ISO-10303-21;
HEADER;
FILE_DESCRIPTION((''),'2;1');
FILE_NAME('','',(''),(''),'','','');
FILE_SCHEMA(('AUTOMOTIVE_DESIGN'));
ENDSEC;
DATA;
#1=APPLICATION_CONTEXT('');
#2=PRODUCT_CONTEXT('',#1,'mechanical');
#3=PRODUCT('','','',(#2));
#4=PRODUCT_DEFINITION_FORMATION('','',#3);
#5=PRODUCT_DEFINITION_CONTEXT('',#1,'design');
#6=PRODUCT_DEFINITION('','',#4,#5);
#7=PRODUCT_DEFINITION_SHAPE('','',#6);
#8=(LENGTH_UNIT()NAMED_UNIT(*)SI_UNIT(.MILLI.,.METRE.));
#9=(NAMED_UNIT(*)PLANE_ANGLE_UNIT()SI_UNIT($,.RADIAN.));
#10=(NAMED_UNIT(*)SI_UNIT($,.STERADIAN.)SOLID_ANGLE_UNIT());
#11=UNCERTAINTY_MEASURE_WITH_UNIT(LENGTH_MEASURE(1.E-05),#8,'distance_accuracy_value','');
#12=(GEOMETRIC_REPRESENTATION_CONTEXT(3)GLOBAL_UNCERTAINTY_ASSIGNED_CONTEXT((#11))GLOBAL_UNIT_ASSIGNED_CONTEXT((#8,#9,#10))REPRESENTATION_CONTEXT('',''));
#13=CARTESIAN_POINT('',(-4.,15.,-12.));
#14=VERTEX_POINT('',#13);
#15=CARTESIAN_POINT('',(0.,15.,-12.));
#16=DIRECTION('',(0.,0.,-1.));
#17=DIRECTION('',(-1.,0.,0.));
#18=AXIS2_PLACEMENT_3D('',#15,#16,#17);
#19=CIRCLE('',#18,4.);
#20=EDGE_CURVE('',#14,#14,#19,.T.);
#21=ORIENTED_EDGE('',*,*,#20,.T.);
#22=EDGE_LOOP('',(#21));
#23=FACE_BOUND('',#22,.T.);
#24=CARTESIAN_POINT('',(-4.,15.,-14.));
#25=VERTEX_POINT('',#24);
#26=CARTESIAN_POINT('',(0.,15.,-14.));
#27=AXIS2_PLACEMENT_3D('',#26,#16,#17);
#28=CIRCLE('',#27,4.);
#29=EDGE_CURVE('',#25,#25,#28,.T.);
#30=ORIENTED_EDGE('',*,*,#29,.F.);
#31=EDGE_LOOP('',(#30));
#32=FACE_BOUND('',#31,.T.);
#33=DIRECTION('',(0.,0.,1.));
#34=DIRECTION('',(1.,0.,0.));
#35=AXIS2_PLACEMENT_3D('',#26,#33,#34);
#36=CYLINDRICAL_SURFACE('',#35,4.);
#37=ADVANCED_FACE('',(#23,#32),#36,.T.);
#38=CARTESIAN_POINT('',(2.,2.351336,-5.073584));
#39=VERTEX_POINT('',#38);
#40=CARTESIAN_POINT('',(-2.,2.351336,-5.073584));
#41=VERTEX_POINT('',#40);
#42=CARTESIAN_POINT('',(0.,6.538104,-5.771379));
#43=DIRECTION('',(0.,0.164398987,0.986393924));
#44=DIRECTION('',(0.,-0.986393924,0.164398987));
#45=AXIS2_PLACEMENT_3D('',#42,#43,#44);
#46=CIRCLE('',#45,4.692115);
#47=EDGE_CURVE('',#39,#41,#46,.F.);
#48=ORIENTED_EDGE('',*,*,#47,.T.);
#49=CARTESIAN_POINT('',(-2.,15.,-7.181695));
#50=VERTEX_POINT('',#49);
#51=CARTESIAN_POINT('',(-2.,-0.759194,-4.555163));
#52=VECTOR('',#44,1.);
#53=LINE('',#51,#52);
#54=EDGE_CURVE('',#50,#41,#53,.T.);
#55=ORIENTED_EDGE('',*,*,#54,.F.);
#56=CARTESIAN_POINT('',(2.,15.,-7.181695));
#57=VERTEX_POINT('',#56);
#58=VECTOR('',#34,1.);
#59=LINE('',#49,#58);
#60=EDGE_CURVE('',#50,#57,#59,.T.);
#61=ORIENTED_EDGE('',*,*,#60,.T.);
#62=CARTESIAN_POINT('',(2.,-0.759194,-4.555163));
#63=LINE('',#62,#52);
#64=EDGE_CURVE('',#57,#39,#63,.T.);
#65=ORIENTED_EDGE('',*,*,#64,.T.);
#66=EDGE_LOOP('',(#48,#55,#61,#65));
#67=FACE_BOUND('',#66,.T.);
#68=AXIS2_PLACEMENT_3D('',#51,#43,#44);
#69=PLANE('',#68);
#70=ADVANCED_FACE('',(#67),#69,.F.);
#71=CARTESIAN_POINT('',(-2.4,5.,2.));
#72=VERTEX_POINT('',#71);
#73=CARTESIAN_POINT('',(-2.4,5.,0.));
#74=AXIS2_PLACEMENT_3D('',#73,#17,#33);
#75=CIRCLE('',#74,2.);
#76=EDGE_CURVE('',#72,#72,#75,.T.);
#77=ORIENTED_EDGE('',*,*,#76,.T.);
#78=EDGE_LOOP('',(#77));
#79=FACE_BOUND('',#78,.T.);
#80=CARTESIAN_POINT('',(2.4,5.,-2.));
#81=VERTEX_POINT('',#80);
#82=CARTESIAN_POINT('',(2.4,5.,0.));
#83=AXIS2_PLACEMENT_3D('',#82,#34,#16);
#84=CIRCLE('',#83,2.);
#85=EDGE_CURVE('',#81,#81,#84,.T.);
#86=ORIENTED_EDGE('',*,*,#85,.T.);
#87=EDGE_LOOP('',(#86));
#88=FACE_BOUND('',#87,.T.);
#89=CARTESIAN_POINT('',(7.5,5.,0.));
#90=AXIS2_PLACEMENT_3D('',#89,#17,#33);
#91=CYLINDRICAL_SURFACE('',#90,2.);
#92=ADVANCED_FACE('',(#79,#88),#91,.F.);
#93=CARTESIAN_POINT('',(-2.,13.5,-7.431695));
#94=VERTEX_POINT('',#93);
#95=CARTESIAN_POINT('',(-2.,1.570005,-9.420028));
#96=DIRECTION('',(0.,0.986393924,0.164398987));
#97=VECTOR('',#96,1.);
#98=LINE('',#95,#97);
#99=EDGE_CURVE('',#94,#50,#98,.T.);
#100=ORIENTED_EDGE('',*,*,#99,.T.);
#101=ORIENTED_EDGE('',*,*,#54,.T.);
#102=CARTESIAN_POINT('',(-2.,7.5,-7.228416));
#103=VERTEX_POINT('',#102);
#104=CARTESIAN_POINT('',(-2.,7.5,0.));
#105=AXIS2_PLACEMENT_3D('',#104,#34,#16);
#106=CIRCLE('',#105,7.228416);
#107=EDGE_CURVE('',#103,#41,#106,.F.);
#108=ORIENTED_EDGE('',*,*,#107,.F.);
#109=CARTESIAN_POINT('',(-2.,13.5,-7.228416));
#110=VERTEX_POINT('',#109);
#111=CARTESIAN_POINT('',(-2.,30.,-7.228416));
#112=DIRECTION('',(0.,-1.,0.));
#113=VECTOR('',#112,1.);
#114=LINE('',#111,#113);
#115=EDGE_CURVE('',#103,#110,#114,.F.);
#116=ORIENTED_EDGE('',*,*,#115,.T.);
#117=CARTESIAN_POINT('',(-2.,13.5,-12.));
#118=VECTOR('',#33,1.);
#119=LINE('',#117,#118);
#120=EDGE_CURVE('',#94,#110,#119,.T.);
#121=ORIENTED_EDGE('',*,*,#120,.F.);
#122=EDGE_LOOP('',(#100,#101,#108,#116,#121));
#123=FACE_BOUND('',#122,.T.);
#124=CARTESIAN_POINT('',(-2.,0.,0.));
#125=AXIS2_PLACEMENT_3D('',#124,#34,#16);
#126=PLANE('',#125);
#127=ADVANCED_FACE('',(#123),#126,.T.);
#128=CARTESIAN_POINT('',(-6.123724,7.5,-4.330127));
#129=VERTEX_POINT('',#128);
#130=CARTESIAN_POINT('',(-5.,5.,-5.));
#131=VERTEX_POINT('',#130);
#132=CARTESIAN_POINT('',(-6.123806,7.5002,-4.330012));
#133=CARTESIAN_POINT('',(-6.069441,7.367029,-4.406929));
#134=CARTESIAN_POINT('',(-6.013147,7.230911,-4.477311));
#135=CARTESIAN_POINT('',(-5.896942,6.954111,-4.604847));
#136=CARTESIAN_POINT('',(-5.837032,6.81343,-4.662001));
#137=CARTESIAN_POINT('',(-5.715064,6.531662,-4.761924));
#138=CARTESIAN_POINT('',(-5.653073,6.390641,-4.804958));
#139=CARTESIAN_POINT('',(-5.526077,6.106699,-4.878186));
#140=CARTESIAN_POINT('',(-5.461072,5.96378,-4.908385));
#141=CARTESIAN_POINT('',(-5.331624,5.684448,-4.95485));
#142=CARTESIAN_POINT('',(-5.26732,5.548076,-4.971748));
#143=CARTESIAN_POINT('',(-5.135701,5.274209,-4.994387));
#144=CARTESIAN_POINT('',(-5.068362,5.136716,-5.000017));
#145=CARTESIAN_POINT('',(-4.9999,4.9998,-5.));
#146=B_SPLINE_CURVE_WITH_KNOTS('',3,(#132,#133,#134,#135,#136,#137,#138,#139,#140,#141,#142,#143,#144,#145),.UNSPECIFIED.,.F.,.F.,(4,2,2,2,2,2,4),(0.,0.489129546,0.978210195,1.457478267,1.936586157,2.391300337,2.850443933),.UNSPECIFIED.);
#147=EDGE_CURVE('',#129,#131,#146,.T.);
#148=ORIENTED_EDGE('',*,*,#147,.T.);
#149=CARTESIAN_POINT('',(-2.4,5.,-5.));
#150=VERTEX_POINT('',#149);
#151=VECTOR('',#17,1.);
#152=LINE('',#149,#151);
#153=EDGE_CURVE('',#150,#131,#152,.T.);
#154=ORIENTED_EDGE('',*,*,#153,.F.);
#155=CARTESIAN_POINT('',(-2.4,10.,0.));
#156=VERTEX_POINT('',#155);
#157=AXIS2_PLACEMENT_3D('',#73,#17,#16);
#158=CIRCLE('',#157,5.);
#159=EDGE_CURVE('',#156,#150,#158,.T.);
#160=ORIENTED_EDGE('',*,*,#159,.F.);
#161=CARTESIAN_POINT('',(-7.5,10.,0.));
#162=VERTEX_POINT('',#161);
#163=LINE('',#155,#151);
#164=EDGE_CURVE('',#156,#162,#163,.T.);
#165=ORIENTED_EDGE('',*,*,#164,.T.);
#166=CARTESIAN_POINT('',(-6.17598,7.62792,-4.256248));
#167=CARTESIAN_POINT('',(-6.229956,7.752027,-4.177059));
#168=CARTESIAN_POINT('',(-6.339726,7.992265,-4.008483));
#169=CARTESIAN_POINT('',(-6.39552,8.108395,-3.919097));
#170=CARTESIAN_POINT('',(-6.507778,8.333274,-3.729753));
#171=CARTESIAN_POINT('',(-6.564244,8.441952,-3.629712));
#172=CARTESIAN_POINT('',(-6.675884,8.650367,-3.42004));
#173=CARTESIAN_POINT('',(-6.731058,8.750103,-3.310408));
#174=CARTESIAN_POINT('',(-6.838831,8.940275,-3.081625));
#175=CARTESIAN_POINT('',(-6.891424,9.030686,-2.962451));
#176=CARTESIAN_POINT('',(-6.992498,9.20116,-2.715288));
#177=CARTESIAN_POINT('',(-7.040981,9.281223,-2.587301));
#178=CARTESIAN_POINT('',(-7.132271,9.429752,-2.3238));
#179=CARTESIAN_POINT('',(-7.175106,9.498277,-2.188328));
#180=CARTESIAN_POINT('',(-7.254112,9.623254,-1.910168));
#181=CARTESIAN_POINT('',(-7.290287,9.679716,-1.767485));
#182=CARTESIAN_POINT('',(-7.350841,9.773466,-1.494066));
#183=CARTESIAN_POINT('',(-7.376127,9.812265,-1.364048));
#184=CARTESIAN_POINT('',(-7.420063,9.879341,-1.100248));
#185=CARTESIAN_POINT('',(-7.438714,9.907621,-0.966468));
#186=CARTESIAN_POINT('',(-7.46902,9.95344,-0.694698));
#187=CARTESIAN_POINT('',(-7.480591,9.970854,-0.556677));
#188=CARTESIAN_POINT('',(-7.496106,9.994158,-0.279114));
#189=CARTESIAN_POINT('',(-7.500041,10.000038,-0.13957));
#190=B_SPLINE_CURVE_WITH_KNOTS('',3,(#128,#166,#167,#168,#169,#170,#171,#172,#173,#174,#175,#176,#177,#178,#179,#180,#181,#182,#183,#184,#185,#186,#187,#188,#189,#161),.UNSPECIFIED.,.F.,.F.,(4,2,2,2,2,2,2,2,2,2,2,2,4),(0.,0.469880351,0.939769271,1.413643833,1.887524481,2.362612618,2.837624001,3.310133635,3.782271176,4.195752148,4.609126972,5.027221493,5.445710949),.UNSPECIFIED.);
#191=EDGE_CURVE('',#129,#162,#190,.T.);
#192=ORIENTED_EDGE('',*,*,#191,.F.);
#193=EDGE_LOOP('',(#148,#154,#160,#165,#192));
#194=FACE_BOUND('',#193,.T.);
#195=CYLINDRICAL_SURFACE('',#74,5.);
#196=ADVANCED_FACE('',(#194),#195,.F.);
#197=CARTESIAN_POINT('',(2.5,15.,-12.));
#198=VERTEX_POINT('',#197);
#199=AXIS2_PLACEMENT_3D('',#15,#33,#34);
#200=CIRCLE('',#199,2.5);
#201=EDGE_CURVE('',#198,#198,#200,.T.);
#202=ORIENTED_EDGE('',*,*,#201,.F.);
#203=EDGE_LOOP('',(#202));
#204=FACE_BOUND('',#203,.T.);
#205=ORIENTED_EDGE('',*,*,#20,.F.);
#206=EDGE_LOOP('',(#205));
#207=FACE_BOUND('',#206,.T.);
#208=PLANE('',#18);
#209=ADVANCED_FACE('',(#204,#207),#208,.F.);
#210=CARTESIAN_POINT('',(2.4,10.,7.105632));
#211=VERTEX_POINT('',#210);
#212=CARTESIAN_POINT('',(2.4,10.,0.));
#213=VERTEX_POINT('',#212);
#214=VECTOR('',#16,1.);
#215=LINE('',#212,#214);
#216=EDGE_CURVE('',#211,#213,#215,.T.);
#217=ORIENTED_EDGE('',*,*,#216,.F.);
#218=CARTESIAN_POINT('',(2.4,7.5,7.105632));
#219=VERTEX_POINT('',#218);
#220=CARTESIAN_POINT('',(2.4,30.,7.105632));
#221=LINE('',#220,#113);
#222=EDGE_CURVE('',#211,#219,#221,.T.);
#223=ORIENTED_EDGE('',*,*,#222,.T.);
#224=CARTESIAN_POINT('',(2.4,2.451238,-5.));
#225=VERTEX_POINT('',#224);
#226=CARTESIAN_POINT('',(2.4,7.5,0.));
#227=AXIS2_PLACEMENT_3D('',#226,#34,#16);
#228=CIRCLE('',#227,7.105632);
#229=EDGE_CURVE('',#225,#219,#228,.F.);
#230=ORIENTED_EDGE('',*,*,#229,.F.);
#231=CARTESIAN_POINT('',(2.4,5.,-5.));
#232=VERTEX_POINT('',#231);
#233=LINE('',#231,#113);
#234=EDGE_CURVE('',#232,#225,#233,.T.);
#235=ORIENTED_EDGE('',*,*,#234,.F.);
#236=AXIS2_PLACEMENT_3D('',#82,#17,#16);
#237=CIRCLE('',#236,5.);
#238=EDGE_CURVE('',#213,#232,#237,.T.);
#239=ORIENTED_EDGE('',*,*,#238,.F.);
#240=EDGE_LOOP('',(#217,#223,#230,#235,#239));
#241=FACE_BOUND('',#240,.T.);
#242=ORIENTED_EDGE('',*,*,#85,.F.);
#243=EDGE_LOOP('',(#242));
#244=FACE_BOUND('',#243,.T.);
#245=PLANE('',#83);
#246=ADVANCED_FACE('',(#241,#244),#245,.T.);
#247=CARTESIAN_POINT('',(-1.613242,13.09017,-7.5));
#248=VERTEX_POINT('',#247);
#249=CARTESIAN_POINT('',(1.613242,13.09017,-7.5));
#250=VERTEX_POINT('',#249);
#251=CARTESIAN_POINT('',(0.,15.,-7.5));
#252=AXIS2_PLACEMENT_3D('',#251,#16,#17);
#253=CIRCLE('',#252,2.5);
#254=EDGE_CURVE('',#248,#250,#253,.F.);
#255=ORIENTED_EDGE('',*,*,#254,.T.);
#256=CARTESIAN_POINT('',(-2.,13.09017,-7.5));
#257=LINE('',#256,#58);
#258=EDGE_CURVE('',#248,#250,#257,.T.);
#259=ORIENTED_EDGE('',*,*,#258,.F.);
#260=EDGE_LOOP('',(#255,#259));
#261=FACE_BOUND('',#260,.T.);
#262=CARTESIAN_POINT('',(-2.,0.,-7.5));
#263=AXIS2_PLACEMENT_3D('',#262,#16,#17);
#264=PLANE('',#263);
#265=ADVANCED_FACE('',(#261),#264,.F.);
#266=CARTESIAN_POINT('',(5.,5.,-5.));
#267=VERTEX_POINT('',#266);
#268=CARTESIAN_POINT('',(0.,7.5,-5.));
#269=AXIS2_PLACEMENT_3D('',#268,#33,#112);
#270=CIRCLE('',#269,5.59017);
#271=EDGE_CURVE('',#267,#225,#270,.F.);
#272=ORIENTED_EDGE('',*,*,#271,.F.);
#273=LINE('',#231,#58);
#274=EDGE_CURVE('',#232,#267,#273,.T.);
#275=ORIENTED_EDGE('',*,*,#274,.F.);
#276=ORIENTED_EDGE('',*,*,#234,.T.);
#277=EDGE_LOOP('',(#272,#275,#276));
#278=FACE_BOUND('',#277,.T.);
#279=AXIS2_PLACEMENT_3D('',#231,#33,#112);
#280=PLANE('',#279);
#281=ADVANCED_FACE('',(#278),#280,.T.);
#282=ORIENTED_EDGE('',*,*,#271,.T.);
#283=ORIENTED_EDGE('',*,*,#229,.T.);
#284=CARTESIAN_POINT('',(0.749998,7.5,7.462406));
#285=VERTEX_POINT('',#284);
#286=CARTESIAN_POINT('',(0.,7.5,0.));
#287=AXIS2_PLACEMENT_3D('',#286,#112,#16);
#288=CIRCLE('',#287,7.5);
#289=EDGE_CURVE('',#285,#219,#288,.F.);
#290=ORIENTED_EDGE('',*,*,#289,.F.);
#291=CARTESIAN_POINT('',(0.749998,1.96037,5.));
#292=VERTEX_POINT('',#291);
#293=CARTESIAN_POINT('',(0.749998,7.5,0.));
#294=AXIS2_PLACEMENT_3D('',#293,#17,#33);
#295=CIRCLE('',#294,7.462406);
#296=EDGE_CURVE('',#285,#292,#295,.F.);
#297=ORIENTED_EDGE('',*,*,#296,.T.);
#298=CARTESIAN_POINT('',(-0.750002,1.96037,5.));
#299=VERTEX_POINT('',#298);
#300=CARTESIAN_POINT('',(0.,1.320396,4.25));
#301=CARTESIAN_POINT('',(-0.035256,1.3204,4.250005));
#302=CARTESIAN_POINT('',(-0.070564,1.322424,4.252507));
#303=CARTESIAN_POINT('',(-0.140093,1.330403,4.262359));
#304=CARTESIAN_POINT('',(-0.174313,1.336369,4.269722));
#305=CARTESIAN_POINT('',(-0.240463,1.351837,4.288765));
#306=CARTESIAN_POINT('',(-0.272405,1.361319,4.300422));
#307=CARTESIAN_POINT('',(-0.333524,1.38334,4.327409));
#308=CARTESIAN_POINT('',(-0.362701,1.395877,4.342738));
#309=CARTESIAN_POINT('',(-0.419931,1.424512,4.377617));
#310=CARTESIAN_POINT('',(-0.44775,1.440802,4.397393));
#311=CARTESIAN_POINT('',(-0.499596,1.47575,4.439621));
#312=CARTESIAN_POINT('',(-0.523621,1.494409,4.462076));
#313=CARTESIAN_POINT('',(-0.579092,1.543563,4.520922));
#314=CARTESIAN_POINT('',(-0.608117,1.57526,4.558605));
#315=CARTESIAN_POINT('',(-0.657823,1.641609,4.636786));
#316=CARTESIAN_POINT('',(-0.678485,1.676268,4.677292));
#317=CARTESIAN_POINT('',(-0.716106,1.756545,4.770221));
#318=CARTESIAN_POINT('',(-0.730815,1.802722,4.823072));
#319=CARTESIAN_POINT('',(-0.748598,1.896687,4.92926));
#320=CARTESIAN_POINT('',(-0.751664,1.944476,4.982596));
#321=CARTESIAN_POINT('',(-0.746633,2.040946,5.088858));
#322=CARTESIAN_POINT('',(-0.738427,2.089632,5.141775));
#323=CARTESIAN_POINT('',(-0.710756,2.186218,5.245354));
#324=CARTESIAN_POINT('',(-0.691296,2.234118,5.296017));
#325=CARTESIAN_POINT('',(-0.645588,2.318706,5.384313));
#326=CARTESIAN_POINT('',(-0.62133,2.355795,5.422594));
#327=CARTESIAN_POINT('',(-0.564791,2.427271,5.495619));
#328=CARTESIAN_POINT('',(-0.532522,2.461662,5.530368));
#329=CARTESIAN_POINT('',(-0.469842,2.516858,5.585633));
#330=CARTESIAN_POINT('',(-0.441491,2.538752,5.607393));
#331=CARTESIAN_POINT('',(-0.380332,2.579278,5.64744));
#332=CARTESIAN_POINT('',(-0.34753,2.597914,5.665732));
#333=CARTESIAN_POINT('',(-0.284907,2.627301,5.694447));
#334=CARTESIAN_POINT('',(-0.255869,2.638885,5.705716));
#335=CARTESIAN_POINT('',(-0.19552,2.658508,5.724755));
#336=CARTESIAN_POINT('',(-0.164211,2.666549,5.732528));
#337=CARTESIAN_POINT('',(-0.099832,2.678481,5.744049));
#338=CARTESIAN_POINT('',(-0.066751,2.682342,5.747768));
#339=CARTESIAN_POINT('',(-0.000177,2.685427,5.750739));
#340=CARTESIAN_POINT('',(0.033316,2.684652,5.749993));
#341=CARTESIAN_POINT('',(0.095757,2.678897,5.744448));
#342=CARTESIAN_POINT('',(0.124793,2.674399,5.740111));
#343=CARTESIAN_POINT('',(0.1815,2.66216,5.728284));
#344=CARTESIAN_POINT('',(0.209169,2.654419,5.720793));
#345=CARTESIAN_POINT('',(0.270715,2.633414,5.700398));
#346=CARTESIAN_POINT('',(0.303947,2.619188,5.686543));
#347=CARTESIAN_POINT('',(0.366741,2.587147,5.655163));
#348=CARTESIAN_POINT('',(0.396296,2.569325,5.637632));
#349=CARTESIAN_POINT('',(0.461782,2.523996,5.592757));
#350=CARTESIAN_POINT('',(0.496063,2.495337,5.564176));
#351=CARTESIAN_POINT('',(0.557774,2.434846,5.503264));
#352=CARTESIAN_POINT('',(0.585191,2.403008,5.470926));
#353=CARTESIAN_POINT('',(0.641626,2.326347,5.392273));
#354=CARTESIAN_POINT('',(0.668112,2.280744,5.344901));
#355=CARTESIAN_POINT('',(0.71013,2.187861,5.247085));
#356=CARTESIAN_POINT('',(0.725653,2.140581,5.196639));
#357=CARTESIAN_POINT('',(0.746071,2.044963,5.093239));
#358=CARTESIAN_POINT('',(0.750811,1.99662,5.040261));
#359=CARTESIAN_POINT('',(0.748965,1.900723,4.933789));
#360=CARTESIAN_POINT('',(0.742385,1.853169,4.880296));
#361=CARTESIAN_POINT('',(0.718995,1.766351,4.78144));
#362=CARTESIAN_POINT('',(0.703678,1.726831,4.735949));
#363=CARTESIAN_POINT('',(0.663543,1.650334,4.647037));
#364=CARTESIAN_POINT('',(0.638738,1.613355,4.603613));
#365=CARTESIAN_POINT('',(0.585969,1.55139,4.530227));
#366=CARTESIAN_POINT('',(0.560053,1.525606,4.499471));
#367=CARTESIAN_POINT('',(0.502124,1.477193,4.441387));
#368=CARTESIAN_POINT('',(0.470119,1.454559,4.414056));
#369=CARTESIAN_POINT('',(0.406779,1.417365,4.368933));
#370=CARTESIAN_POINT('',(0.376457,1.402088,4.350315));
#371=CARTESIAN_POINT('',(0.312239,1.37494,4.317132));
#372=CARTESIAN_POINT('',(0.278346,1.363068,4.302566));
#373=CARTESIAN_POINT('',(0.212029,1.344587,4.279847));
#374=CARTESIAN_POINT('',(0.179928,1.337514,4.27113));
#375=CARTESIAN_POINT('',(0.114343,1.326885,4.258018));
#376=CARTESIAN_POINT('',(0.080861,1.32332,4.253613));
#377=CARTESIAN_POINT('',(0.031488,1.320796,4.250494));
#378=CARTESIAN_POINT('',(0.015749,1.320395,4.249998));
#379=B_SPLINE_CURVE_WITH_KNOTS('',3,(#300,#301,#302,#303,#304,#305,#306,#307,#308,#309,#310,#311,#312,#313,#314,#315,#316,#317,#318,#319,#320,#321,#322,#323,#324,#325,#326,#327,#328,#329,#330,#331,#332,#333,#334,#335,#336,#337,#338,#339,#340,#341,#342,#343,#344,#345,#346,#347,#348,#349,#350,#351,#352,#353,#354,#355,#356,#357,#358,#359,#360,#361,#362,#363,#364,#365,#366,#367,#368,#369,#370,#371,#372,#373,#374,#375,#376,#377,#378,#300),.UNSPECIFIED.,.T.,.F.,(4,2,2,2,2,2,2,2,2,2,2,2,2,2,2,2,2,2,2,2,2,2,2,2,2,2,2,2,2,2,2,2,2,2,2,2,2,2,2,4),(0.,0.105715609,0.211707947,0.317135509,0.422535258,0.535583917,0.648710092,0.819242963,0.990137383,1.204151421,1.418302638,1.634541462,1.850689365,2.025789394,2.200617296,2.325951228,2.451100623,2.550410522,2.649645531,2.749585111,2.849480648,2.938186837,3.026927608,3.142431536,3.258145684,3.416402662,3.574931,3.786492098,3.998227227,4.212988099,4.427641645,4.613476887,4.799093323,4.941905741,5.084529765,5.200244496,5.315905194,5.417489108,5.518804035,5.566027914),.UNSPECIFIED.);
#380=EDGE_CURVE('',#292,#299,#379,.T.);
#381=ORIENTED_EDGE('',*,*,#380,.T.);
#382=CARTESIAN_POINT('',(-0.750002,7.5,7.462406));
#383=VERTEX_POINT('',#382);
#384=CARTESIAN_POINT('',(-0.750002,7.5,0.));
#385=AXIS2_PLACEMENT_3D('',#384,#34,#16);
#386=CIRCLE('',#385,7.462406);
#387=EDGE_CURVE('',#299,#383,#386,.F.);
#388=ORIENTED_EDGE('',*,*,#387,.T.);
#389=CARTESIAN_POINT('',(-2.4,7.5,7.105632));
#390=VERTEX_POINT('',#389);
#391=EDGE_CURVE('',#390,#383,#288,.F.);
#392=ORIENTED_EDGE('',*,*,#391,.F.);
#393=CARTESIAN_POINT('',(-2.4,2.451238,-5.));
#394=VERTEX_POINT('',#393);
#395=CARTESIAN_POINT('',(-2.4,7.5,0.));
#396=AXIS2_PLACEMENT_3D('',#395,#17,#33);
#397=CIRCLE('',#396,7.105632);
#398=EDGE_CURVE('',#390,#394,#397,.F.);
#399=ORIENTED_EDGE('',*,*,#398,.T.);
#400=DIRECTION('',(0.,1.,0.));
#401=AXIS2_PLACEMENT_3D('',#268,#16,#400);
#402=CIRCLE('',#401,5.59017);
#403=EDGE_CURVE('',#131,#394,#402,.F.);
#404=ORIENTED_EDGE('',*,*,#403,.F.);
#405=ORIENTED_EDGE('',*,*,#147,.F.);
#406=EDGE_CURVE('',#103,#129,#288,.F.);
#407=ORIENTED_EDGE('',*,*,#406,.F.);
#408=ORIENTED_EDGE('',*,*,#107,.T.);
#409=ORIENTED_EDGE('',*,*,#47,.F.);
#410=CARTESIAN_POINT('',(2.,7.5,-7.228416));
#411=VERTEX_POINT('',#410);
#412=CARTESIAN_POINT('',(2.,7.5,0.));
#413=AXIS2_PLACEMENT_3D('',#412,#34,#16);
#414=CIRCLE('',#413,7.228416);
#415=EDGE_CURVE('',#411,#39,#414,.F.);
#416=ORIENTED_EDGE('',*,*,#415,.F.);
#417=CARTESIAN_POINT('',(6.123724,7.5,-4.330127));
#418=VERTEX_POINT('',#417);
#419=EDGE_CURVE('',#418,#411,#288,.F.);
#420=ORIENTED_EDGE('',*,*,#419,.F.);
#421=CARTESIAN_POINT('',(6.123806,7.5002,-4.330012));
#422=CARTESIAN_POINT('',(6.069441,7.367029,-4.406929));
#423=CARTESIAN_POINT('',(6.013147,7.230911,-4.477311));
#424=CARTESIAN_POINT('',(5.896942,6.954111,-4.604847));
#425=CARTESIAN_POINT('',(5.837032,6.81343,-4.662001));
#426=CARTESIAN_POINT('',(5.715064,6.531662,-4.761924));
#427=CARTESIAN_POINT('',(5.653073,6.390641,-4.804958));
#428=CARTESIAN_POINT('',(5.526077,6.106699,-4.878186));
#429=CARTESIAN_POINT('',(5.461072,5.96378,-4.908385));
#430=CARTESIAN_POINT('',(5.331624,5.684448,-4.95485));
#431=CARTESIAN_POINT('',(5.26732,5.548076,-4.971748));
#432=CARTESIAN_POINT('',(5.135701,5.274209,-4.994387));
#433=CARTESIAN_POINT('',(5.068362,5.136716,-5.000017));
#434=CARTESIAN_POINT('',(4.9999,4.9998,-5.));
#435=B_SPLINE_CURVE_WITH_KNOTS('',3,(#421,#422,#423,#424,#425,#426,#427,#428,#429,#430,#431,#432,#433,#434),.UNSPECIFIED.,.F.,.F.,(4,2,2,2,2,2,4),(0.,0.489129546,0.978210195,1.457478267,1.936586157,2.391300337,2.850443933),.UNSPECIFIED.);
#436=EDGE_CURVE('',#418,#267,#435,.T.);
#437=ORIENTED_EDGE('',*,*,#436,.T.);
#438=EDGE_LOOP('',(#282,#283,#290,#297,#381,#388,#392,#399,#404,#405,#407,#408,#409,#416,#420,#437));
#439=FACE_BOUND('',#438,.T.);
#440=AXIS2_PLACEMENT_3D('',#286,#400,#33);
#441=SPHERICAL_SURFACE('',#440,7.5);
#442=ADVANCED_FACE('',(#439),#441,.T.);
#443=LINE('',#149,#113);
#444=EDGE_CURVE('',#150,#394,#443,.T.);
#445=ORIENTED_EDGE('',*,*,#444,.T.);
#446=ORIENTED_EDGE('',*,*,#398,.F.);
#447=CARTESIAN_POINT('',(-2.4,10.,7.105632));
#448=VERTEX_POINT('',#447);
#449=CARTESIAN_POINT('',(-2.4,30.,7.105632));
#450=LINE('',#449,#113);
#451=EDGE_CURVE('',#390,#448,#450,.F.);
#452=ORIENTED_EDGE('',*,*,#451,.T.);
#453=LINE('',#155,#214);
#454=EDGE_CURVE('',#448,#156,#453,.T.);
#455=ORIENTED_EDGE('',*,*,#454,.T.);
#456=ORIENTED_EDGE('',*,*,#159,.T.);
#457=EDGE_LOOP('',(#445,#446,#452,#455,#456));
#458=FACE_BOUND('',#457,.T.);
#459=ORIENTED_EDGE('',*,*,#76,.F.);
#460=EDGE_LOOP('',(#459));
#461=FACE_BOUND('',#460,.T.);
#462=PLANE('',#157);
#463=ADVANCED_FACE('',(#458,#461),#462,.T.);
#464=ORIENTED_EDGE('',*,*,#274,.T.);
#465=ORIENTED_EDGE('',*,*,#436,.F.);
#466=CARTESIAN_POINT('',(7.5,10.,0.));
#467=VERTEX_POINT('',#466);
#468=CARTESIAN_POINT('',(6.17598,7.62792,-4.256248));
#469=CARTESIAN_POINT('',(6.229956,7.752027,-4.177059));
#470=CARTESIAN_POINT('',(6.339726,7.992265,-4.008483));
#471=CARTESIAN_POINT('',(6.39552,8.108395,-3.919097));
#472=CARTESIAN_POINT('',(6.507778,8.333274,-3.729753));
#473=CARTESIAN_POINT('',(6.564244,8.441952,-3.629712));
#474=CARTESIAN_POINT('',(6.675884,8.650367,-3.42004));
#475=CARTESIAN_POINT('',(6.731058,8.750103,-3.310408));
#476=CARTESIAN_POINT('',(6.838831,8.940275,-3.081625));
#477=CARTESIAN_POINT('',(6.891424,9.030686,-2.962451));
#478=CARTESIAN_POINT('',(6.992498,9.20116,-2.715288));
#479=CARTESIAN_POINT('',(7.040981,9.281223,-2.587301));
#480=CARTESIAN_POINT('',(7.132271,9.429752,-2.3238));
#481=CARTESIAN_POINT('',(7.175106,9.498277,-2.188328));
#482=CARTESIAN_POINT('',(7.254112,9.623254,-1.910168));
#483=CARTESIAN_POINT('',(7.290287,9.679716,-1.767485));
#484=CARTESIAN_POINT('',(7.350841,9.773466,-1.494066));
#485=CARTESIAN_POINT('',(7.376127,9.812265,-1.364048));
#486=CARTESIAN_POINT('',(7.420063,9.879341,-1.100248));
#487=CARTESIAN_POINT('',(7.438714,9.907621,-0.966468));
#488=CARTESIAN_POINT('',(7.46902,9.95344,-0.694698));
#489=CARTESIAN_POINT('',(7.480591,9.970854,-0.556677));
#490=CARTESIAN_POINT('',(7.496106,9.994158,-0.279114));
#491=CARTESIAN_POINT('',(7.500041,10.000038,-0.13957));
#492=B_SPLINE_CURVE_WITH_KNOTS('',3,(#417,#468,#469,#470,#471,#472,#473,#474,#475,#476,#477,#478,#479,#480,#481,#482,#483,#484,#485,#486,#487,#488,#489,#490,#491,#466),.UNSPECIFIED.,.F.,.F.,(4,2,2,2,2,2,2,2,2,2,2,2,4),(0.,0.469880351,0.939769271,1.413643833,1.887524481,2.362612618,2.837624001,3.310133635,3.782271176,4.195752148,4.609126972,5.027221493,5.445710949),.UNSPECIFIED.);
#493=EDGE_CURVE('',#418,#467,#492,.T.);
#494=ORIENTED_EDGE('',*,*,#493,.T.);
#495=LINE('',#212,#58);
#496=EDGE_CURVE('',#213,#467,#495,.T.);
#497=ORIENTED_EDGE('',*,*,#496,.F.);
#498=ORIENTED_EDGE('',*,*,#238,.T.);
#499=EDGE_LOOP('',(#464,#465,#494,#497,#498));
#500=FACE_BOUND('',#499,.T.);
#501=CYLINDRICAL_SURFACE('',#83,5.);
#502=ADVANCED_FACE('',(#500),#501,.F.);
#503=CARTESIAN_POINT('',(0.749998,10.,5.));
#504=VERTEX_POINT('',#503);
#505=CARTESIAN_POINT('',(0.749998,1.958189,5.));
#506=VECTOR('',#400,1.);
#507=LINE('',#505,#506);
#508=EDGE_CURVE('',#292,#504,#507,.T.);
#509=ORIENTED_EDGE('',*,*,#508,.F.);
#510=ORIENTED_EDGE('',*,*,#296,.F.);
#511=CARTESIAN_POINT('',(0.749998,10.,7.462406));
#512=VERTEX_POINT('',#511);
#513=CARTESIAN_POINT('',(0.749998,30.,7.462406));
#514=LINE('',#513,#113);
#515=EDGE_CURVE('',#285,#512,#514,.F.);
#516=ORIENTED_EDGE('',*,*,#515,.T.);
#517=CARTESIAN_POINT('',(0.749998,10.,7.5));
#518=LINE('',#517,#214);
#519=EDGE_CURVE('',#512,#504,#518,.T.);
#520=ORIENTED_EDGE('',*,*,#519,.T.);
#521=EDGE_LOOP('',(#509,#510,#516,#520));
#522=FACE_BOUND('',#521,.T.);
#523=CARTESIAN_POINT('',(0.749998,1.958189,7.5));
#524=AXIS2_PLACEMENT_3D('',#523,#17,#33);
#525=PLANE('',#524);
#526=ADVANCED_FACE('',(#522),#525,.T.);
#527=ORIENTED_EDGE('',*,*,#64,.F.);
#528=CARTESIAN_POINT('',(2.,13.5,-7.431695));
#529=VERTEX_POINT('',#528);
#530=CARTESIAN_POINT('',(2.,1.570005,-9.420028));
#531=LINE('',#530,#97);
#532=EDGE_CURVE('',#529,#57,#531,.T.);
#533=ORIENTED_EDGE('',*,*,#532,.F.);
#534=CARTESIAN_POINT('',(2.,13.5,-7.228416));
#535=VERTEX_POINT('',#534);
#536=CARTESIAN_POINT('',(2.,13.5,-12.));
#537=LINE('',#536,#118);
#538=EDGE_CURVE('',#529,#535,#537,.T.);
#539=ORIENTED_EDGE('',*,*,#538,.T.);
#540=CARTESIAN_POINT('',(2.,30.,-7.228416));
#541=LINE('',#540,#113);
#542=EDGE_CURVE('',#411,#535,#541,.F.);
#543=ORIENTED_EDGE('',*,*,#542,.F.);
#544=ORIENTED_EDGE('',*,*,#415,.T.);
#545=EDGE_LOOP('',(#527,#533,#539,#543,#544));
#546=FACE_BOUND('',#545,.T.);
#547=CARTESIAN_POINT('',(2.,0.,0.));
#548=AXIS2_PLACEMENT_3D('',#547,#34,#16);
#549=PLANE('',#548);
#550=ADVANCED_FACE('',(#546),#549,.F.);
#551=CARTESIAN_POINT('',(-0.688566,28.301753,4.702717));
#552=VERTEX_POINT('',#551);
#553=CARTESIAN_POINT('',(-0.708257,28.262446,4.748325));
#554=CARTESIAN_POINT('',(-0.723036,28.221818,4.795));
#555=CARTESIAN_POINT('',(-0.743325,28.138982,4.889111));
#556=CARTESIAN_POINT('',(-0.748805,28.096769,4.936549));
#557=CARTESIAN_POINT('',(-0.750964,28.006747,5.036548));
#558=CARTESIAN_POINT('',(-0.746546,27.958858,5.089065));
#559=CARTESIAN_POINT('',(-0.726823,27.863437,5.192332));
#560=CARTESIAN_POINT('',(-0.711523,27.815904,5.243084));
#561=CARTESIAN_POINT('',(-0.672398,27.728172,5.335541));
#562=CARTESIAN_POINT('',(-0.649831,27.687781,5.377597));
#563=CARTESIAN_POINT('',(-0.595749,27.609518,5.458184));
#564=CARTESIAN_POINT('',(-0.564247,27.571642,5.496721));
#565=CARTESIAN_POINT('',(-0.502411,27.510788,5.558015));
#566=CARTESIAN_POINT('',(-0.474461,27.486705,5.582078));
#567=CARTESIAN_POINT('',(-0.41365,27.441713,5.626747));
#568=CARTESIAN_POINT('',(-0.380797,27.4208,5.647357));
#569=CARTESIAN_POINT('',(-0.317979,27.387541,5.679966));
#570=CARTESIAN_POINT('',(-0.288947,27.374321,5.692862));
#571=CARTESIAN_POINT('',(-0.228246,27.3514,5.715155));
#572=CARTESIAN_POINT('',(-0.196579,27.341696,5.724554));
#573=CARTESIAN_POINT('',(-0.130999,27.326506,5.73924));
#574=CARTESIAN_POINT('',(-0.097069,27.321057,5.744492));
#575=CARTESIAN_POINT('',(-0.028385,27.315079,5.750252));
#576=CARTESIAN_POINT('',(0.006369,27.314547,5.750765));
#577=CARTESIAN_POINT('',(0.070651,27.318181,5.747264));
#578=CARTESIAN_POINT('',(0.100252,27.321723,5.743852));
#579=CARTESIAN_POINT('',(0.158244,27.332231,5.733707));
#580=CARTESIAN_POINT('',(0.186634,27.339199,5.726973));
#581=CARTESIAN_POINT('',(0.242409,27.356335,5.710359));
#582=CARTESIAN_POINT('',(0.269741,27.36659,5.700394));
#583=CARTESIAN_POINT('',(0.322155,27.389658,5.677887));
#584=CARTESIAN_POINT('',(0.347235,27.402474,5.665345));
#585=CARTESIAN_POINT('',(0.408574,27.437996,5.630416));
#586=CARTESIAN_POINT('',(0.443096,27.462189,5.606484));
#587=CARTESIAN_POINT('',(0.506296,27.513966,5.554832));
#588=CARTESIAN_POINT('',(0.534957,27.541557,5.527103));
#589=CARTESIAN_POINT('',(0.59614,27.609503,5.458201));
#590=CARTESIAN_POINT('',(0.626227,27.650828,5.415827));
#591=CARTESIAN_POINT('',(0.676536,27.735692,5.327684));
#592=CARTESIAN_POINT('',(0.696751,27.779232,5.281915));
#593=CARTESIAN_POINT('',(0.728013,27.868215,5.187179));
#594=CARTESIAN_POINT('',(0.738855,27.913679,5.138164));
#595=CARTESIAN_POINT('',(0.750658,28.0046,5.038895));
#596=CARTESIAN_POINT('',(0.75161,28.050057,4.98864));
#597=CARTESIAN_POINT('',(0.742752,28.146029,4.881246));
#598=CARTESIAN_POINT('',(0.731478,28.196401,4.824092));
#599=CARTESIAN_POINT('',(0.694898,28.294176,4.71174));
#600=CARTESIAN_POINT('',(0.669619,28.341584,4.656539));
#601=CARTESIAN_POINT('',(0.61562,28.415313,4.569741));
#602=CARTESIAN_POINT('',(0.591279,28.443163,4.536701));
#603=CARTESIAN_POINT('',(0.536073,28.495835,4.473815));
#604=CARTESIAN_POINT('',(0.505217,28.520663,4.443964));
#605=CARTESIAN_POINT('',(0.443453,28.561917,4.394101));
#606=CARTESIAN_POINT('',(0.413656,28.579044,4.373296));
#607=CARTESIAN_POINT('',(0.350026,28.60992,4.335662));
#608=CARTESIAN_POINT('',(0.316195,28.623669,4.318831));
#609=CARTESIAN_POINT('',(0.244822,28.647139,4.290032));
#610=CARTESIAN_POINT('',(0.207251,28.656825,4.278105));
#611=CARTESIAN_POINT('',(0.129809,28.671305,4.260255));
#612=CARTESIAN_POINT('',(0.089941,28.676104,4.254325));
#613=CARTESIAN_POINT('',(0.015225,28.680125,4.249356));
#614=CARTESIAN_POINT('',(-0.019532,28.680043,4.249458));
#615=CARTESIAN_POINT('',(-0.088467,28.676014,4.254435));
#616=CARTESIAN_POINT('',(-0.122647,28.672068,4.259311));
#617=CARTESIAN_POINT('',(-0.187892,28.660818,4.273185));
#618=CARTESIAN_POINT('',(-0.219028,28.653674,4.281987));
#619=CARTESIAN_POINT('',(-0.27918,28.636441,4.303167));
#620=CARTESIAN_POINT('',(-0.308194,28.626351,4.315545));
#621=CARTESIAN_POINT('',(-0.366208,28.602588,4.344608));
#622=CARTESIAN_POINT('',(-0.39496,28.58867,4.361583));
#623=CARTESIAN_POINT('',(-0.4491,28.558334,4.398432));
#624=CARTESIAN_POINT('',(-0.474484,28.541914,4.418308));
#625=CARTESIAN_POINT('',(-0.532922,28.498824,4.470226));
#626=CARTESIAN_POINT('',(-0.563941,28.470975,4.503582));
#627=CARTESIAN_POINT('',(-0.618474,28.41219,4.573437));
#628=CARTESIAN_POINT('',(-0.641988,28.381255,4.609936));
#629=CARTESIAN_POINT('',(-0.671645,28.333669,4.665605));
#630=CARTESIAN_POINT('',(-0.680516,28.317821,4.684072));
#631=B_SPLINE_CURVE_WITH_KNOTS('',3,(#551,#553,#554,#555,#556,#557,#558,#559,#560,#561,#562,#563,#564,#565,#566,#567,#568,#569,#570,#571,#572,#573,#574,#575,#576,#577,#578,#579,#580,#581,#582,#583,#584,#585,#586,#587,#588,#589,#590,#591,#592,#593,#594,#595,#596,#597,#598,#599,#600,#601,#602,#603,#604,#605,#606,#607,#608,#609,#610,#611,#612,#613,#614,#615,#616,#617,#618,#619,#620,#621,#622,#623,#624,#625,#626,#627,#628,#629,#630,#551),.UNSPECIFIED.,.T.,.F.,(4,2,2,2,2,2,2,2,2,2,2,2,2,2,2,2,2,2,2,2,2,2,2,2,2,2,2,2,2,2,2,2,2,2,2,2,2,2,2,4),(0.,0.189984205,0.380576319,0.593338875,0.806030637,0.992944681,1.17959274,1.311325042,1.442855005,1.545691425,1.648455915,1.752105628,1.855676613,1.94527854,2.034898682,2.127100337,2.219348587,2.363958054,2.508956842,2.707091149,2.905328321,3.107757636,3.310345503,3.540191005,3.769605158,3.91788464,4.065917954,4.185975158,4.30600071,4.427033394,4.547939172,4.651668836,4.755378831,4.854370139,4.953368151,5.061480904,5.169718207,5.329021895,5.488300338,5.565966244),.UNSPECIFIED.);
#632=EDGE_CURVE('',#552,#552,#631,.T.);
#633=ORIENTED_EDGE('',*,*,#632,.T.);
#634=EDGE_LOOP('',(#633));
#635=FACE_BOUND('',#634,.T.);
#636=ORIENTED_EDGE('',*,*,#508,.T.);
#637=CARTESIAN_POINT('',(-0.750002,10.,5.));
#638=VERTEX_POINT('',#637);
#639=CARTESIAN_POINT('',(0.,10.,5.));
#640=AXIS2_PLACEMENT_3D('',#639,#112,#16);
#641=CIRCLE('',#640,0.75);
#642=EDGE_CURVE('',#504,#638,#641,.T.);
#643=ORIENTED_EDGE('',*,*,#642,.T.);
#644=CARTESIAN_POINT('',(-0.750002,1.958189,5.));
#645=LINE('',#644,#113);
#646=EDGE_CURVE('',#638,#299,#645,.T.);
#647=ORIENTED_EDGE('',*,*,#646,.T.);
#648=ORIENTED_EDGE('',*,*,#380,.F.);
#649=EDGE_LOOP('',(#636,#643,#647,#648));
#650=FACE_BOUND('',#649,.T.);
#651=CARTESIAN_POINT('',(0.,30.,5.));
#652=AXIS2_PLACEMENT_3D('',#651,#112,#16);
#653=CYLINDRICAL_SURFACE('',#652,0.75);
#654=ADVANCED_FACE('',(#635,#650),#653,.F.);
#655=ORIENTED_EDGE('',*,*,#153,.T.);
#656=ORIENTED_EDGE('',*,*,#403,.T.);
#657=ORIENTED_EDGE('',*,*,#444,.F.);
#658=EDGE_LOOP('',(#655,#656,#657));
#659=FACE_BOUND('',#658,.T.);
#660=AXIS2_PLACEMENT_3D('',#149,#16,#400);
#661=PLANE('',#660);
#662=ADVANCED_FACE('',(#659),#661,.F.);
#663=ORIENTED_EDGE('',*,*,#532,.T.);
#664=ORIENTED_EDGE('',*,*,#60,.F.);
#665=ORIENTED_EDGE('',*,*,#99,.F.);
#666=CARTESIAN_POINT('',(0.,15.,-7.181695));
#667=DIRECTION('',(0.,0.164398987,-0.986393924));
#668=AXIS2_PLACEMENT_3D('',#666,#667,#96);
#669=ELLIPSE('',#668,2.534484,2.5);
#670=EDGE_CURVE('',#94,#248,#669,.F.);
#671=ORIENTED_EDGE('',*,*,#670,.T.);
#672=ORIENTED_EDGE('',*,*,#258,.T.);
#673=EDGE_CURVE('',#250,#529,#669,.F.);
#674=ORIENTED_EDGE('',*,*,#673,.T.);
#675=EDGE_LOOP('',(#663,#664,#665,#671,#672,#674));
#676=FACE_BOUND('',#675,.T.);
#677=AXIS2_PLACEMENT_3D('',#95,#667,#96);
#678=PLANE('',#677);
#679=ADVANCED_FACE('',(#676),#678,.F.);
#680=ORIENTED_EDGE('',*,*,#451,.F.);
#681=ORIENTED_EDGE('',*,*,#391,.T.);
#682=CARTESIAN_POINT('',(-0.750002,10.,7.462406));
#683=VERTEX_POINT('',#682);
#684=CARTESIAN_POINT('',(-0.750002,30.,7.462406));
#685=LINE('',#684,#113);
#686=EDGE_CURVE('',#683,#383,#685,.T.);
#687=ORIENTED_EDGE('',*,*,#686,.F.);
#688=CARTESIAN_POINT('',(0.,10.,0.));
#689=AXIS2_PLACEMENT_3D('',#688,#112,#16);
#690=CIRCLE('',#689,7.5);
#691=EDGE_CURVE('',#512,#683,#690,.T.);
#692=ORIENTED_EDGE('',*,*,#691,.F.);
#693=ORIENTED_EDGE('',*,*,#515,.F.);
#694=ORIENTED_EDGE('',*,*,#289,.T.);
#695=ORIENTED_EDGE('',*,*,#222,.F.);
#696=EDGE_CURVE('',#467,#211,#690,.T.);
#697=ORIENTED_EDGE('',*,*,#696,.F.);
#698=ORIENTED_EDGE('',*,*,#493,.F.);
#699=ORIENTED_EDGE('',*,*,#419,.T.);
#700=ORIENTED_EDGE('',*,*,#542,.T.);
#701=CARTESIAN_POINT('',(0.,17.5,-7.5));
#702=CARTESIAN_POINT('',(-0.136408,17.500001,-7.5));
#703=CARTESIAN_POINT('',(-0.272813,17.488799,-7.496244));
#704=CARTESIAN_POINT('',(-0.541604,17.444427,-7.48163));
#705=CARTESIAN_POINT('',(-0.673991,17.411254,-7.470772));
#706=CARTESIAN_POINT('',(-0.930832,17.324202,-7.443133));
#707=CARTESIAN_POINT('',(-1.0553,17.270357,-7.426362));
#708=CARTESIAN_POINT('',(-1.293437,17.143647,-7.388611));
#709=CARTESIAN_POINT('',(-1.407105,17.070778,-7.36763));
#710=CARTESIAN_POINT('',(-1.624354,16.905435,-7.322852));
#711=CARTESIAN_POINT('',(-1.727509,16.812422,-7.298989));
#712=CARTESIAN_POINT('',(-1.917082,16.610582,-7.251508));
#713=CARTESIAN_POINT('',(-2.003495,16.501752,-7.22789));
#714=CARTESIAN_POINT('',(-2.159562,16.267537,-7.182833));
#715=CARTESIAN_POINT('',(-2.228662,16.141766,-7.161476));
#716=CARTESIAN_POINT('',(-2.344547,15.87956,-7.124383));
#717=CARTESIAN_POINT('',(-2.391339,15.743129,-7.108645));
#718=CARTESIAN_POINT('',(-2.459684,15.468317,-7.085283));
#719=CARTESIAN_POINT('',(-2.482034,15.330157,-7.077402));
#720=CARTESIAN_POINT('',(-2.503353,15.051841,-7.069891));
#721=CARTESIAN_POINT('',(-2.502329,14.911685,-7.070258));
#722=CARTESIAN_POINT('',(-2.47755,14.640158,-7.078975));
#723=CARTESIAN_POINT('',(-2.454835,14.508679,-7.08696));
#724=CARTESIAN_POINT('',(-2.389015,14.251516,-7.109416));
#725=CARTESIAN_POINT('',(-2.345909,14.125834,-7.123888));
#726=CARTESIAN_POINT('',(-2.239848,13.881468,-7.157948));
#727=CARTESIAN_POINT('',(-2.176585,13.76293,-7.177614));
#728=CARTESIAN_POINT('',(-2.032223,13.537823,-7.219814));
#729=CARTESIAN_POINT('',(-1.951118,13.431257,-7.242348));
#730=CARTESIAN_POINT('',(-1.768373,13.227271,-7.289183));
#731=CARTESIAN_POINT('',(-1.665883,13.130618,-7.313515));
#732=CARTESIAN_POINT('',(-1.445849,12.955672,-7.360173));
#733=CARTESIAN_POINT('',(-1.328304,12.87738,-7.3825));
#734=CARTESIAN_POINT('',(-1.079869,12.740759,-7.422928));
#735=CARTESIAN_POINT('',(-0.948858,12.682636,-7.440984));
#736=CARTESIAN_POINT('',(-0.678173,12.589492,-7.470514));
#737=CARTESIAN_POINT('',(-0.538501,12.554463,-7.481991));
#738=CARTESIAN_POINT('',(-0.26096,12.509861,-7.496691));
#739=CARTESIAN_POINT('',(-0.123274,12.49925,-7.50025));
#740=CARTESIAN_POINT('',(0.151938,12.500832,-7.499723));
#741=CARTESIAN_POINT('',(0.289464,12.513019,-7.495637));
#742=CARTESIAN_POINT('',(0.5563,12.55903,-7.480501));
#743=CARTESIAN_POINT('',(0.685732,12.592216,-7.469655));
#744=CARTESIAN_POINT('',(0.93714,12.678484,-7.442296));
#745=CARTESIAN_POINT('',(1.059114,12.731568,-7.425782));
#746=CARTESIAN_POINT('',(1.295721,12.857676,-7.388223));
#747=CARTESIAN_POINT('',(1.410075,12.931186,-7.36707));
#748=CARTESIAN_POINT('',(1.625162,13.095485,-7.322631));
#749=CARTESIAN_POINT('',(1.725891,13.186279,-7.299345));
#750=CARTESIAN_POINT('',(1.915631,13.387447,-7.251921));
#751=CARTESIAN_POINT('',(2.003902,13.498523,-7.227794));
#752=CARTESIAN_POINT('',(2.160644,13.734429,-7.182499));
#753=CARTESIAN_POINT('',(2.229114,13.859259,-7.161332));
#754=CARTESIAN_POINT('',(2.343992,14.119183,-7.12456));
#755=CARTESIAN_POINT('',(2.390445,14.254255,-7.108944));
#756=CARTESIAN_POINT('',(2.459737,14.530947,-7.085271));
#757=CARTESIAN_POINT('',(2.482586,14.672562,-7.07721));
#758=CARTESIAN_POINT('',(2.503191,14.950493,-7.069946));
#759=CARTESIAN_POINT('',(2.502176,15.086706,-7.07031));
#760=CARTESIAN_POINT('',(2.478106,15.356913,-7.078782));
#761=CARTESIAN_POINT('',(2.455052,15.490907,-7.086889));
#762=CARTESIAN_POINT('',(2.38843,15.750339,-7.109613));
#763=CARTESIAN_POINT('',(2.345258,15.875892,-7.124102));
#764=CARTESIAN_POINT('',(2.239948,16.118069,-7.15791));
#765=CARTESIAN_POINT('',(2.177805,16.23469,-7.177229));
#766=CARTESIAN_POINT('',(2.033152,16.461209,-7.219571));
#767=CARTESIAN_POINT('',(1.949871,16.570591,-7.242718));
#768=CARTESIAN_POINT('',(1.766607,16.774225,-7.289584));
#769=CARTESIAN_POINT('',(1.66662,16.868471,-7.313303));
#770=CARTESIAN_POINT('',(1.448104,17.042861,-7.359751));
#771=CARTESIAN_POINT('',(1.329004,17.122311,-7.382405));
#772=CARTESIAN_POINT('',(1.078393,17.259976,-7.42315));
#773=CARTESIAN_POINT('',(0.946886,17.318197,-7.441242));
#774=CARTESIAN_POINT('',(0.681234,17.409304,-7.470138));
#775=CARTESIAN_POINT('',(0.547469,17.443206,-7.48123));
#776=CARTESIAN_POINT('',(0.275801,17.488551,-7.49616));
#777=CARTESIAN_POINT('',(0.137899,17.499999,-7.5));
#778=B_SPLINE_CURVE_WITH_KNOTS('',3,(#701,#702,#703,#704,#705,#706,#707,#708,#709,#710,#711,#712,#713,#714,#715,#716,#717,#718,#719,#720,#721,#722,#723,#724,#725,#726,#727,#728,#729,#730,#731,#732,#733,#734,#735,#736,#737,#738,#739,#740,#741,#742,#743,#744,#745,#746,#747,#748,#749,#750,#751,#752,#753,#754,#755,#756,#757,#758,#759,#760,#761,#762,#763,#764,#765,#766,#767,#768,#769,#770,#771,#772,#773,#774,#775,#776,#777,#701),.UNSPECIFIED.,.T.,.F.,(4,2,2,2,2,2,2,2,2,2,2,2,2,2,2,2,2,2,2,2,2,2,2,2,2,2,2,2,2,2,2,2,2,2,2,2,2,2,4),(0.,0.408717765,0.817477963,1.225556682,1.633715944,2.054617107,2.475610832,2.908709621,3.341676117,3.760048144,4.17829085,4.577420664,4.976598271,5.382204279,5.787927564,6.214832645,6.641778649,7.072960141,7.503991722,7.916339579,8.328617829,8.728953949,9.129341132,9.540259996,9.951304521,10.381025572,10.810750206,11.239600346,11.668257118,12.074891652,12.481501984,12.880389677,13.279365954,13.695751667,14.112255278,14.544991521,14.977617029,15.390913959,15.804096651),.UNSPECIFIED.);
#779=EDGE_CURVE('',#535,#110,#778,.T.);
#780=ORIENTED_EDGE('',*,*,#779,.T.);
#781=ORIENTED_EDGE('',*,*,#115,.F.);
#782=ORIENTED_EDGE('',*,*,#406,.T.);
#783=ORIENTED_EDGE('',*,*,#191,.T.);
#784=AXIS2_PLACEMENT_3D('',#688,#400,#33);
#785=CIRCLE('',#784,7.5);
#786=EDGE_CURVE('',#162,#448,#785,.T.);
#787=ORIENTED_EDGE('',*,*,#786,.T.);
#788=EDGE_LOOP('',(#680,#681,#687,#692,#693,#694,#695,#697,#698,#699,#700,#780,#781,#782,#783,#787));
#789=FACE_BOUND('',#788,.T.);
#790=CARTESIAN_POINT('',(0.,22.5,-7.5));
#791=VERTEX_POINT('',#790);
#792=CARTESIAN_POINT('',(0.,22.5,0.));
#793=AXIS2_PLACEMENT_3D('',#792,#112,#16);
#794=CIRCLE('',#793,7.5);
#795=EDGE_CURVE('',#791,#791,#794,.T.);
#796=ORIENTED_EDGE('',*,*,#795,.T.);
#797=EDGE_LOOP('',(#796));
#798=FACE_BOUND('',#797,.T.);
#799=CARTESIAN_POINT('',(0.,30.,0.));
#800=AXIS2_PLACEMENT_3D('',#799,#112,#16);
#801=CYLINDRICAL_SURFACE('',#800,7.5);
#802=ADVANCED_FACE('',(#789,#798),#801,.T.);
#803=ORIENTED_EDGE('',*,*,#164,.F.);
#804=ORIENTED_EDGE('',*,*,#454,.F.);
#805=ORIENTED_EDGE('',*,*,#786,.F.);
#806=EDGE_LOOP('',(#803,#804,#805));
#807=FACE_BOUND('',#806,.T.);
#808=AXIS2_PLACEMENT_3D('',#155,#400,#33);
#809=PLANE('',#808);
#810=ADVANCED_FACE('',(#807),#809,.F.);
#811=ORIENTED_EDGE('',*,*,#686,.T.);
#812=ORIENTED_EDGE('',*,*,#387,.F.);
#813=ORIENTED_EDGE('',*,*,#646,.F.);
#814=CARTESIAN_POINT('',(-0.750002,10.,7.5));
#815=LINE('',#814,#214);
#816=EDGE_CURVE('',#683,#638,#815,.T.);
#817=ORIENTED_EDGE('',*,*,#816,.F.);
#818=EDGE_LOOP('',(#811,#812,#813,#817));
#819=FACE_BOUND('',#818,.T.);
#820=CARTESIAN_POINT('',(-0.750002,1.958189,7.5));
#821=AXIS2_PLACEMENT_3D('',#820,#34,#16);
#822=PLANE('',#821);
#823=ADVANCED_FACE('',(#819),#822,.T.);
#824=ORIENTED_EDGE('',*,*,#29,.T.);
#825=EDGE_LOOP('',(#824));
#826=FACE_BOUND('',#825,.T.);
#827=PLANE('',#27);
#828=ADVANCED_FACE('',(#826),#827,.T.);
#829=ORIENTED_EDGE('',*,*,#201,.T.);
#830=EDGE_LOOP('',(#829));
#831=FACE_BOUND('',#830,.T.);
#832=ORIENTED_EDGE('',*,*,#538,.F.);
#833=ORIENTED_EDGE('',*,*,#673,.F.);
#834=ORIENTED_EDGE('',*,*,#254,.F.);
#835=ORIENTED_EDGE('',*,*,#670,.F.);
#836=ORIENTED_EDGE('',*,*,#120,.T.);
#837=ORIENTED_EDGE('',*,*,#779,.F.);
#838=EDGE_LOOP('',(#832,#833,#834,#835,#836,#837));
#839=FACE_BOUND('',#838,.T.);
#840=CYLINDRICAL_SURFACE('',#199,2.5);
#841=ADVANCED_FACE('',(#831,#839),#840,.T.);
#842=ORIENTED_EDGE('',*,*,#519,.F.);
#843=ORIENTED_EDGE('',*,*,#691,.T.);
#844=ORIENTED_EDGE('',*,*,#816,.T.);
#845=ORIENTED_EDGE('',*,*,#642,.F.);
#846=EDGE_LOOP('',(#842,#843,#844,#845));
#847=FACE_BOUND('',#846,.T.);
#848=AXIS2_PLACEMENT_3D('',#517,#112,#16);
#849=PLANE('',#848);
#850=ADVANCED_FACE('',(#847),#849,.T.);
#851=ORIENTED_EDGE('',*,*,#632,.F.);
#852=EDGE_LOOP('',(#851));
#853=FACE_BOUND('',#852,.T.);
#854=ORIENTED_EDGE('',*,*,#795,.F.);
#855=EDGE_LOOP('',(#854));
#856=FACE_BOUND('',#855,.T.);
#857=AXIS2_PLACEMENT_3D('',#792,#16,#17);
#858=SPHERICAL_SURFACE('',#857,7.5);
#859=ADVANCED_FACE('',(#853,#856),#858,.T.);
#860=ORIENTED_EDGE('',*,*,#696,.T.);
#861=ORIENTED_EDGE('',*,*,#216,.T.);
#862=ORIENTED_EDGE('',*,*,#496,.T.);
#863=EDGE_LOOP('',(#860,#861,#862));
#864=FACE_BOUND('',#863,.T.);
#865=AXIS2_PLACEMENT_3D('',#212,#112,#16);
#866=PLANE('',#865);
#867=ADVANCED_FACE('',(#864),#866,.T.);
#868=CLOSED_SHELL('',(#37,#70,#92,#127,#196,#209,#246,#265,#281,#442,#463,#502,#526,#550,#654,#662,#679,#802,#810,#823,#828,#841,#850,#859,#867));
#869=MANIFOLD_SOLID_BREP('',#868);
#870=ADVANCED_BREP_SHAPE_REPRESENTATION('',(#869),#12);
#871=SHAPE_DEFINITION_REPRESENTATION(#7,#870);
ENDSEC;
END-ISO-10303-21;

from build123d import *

# Parameters (mm, degrees)
SKETCH1_R               = 7.5
SKETCH1_R_2             = 0.75
BOSS_EXTRUDE1_DEPTH     = 30
FILLET4_R               = 7.5
SKETCH2_W               = 3.090169944
SKETCH2_H               = 10
BOSS_EXTRUDE2_DEPTH     = 20
SKETCH3_R               = 2
CUT_EXTRUDE1_DEPTH      = 45.300112867
CUT_EXTRUDE4_START      = -45.300113002
SKETCH7_R               = 2
CUT_EXTRUDE4_DEPTH      = 45.400113002
CUT_EXTRUDE5_DEPTH      = 45.300113002
CUT_EXTRUDE5_DEPTH_BACK = 45.300113002
SKETCH7_2_R             = 2
CUT_EXTRUDE8_REACH      = 46.3
SKETCH15_R              = 2.5
BOSS_EXTRUDE3_DEPTH     = 12
SKETCH16_R              = 4
BOSS_EXTRUDE4_DEPTH     = 2
SKETCH13_W              = 1.5
SKETCH13_H              = 8.04181095
CUT_EXTRUDE14_DEPTH     = 48.154003117
SKETCH10_R              = 7.5
CUT_EXTRUDE11_DEPTH     = 28.540878735
REVOLVE1_ANGLE          = 180
SKETCH1_2_R             = 0.75
CUT_EXTRUDE12_DEPTH     = 34.944808167
CUT_EXTRUDE16_DEPTH     = 2


with BuildPart() as part:
    # Sketch1 → Boss-Extrude1 (new body)
    with BuildSketch(Plane(origin=(0, 0, 0), x_dir=(1, 0, 0), z_dir=(0, 1, 0))):
        with Locations(Location((0, 0, 0), (0, 0, 270))):
            Circle(SKETCH1_R)
        with Locations(Location((0, -5, 0), (0, 0, 270))):
            Circle(SKETCH1_R_2, mode=Mode.SUBTRACT)
    extrude(amount=BOSS_EXTRUDE1_DEPTH)

    # Fillet4
    # the kernel refuses this fillet: 7.5 mm, written as the material it takes off along each edge
    with BuildSketch(Plane(origin=(0, 0, 0), x_dir=(0, 0, 1), z_dir=(-1, 0, 0))) as fillet4_piece_1:
        with BuildLine():
            CenterArc((7.5 - FILLET4_R, FILLET4_R), FILLET4_R, 270, 90)
            Line((7.5 - FILLET4_R, 0), (7.5, 0))
            Line((7.5, 0), (7.5, FILLET4_R))
        make_face()
    revolve(axis=Axis((0, 0, 0), (0, 1, 0)), mode=Mode.SUBTRACT)
    with BuildSketch(Plane(origin=(0, 30, 0), x_dir=(0, 0, 1), z_dir=(-1, 0, 0))) as fillet4_piece_2:
        with BuildLine():
            CenterArc((7.5 - FILLET4_R, -FILLET4_R), FILLET4_R, 0, 90)
            Line((7.5 - FILLET4_R, 0), (7.5, 0))
            Line((7.5, 0), (7.5, -FILLET4_R))
        make_face()
    revolve(axis=Axis((0, 30, 0), (0, 1, 0)), mode=Mode.SUBTRACT)

    # Sketch2 → Boss-Extrude2 (add)
    with BuildSketch(Plane(origin=(0, 22.5, 0), x_dir=(1, 0, 0), z_dir=(0, 1, 0))):
        with Locations((4.045084972, 0)):
            Rectangle(SKETCH2_W, SKETCH2_H)
        with BuildLine():
            ThreePointArc((5.590169944, -5), (7.5, 0), (5.590169944, 5))
            Line((5.590169944, 5), (5.590169944, -5))
        make_face()
    boss_extrude2 = extrude(amount=BOSS_EXTRUDE2_DEPTH)

    # Sketch3 → Cut-Extrude1 (cut, symmetric)
    with BuildSketch(Plane.ZY.offset(-2.5)):
        with BuildLine():
            ThreePointArc((-5, 37.5), (-3.535533906, 41.035533906), (0, 42.5))
            Line((0, 42.5), (-5, 42.5))
            Line((-5, 42.5), (-5, 37.5))
        make_face()
        with BuildLine():
            ThreePointArc((0, 42.5), (3.535533906, 41.035533906), (5, 37.5))
            Line((5, 37.5), (5, 42.5))
            Line((5, 42.5), (0, 42.5))
        make_face()
        with Locations(Location((0, 37.5, 0), (0, 0, 270))):
            Circle(SKETCH3_R)
    cut_extrude1 = extrude(amount=CUT_EXTRUDE1_DEPTH, both=True, mode=Mode.SUBTRACT)

    # Sketch7 → Cut-Extrude4 (cut)
    with BuildSketch(Plane.ZY.offset(-2.5).offset(CUT_EXTRUDE4_START)):
        with BuildLine():
            Line((0, 10), (7.5, 10))
            Line((7.5, 10), (7.5, 0))
            Line((7.5, 0), (-5, 0))
            Line((-5, 0), (-5, 5))
            ThreePointArc((-5, 5), (-3.535533906, 8.535533906), (0, 10))
        make_face()
        with Locations(Location((0, 5, 0), (0, 0, 230.136383732))):
            Circle(SKETCH7_R, mode=Mode.SUBTRACT)
    cut_extrude4 = extrude(amount=CUT_EXTRUDE4_DEPTH, mode=Mode.SUBTRACT)

    # Sketch7<2> → Cut-Extrude5 (cut, two sides: drawn at the far end of the back side and taken through both)
    with BuildSketch(Plane.ZY.offset(-2.5).offset(-CUT_EXTRUDE5_DEPTH_BACK)):
        with Locations(Location((0, 5, 0), (0, 0, 222.357273293))):
            Circle(SKETCH7_2_R)
    extrude(amount=CUT_EXTRUDE5_DEPTH + CUT_EXTRUDE5_DEPTH_BACK, mode=Mode.SUBTRACT)

    # Mirror1: Boss-Extrude2, Cut-Extrude1, Cut-Extrude4 across plane
    add(boss_extrude2.mirror(Plane(origin=(0, 0, 0), x_dir=(0, 0, 1), z_dir=(1, 0, 0))))
    add(cut_extrude1.mirror(Plane(origin=(0, 0, 0), x_dir=(0, 0, 1), z_dir=(1, 0, 0))), mode=Mode.SUBTRACT)
    add(cut_extrude4.mirror(Plane(origin=(0, 0, 0), x_dir=(0, 0, 1), z_dir=(1, 0, 0))), mode=Mode.SUBTRACT)

    # Cut-Extrude8: up to this face of the body (flat: up to its plane)
    cut_extrude8_end = Plane(part.part.faces().sort_by_distance((-2.5, 34.956709536, 0))[0])
    # Sketch9 → Cut-Extrude8 (cut, up to the picked face)
    with BuildSketch(Plane.ZY.offset(-2.5), mode=Mode.PRIVATE) as cut_extrude8_sk1:
        with BuildLine():
            Line((5, 27.5), (22.867472592, 27.5))
            Line((22.867472592, 27.5), (22.867472592, 37.5))
            Line((22.867472592, 37.5), (-5, 37.5))
            ThreePointArc((-5, 37.5), (-2.071067812, 30.428932188), (5, 27.5))
        make_face()
    cut_extrude8_tool1 = split(extrude(cut_extrude8_sk1.sketch, amount=CUT_EXTRUDE8_REACH, mode=Mode.PRIVATE), bisect_by=cut_extrude8_end, keep=Keep.BOTH, mode=Mode.PRIVATE)
    add(cut_extrude8_tool1.solids().sort_by(Axis((2.5, 32.730802, 9.909907), (-1, 0, 0)))[0], mode=Mode.SUBTRACT)

    # Sketch15 → Boss-Extrude3 (add)
    with BuildSketch(Plane.XY):
        with Locations((0, 15)):
            Circle(SKETCH15_R)
    extrude(amount=-BOSS_EXTRUDE3_DEPTH)

    # Sketch16 → Boss-Extrude4 (add)
    with BuildSketch(Plane(origin=(0, 0, -12), x_dir=(-1, 0, 0), z_dir=(0, 0, -1))):
        with Locations((0, 15)):
            Circle(SKETCH16_R)
    extrude(amount=BOSS_EXTRUDE4_DEPTH)

    # Sketch13 → Cut-Extrude14 (cut, through all)
    with BuildSketch(Plane.XY.offset(5)):
        with Locations((-1.855e-06, 5.979094525)):
            Rectangle(SKETCH13_W, SKETCH13_H)
    extrude(amount=CUT_EXTRUDE14_DEPTH, mode=Mode.SUBTRACT)

    # Sketch10 → Cut-Extrude11 (cut, through all)
    with BuildSketch(Plane(origin=(0, 22.5, 0), x_dir=(1, 0, 0), z_dir=(0, 1, 0))):
        with Locations(Location((0, 0, 0), (0, 0, 90))):
            Circle(SKETCH10_R)
    extrude(amount=CUT_EXTRUDE11_DEPTH, mode=Mode.SUBTRACT)

    # Sketch11 → Revolve1 (revolve)
    with BuildSketch(Plane(origin=(0, 22.5, 0), x_dir=(1, 0, 0), z_dir=(0, 1, 0))):
        with BuildLine():
            Line((0, 7.5), (0, -7.5))
            ThreePointArc((0, -7.5), (7.5, 0), (0, 7.5))
        make_face()
    revolve(axis=Axis((0, 22.5, -7.5), (0, 0, 1)), revolution_arc=REVOLVE1_ANGLE)

    # Sketch1<2> → Cut-Extrude12 (cut, through all)
    with BuildSketch(Plane(origin=(0, 0, 0), x_dir=(1, 0, 0), z_dir=(0, 1, 0))):
        with Locations(Location((0, -5, 0), (0, 0, 156.648060809))):
            Circle(SKETCH1_2_R)
    extrude(amount=CUT_EXTRUDE12_DEPTH, mode=Mode.SUBTRACT)

    # Sketch14<2> → Cut-Extrude16 (cut, symmetric)
    with BuildSketch(Plane(origin=(0, 0, 0), x_dir=(0, 0, -1), z_dir=(1, 0, 0))):
        Polygon((7.5, 1.909830056), (7.5, 13.090169944), (7.181694991, 15), (5, 1.909830056), align=None)
    extrude(amount=CUT_EXTRUDE16_DEPTH, both=True, mode=Mode.SUBTRACT)


solid = part.part
